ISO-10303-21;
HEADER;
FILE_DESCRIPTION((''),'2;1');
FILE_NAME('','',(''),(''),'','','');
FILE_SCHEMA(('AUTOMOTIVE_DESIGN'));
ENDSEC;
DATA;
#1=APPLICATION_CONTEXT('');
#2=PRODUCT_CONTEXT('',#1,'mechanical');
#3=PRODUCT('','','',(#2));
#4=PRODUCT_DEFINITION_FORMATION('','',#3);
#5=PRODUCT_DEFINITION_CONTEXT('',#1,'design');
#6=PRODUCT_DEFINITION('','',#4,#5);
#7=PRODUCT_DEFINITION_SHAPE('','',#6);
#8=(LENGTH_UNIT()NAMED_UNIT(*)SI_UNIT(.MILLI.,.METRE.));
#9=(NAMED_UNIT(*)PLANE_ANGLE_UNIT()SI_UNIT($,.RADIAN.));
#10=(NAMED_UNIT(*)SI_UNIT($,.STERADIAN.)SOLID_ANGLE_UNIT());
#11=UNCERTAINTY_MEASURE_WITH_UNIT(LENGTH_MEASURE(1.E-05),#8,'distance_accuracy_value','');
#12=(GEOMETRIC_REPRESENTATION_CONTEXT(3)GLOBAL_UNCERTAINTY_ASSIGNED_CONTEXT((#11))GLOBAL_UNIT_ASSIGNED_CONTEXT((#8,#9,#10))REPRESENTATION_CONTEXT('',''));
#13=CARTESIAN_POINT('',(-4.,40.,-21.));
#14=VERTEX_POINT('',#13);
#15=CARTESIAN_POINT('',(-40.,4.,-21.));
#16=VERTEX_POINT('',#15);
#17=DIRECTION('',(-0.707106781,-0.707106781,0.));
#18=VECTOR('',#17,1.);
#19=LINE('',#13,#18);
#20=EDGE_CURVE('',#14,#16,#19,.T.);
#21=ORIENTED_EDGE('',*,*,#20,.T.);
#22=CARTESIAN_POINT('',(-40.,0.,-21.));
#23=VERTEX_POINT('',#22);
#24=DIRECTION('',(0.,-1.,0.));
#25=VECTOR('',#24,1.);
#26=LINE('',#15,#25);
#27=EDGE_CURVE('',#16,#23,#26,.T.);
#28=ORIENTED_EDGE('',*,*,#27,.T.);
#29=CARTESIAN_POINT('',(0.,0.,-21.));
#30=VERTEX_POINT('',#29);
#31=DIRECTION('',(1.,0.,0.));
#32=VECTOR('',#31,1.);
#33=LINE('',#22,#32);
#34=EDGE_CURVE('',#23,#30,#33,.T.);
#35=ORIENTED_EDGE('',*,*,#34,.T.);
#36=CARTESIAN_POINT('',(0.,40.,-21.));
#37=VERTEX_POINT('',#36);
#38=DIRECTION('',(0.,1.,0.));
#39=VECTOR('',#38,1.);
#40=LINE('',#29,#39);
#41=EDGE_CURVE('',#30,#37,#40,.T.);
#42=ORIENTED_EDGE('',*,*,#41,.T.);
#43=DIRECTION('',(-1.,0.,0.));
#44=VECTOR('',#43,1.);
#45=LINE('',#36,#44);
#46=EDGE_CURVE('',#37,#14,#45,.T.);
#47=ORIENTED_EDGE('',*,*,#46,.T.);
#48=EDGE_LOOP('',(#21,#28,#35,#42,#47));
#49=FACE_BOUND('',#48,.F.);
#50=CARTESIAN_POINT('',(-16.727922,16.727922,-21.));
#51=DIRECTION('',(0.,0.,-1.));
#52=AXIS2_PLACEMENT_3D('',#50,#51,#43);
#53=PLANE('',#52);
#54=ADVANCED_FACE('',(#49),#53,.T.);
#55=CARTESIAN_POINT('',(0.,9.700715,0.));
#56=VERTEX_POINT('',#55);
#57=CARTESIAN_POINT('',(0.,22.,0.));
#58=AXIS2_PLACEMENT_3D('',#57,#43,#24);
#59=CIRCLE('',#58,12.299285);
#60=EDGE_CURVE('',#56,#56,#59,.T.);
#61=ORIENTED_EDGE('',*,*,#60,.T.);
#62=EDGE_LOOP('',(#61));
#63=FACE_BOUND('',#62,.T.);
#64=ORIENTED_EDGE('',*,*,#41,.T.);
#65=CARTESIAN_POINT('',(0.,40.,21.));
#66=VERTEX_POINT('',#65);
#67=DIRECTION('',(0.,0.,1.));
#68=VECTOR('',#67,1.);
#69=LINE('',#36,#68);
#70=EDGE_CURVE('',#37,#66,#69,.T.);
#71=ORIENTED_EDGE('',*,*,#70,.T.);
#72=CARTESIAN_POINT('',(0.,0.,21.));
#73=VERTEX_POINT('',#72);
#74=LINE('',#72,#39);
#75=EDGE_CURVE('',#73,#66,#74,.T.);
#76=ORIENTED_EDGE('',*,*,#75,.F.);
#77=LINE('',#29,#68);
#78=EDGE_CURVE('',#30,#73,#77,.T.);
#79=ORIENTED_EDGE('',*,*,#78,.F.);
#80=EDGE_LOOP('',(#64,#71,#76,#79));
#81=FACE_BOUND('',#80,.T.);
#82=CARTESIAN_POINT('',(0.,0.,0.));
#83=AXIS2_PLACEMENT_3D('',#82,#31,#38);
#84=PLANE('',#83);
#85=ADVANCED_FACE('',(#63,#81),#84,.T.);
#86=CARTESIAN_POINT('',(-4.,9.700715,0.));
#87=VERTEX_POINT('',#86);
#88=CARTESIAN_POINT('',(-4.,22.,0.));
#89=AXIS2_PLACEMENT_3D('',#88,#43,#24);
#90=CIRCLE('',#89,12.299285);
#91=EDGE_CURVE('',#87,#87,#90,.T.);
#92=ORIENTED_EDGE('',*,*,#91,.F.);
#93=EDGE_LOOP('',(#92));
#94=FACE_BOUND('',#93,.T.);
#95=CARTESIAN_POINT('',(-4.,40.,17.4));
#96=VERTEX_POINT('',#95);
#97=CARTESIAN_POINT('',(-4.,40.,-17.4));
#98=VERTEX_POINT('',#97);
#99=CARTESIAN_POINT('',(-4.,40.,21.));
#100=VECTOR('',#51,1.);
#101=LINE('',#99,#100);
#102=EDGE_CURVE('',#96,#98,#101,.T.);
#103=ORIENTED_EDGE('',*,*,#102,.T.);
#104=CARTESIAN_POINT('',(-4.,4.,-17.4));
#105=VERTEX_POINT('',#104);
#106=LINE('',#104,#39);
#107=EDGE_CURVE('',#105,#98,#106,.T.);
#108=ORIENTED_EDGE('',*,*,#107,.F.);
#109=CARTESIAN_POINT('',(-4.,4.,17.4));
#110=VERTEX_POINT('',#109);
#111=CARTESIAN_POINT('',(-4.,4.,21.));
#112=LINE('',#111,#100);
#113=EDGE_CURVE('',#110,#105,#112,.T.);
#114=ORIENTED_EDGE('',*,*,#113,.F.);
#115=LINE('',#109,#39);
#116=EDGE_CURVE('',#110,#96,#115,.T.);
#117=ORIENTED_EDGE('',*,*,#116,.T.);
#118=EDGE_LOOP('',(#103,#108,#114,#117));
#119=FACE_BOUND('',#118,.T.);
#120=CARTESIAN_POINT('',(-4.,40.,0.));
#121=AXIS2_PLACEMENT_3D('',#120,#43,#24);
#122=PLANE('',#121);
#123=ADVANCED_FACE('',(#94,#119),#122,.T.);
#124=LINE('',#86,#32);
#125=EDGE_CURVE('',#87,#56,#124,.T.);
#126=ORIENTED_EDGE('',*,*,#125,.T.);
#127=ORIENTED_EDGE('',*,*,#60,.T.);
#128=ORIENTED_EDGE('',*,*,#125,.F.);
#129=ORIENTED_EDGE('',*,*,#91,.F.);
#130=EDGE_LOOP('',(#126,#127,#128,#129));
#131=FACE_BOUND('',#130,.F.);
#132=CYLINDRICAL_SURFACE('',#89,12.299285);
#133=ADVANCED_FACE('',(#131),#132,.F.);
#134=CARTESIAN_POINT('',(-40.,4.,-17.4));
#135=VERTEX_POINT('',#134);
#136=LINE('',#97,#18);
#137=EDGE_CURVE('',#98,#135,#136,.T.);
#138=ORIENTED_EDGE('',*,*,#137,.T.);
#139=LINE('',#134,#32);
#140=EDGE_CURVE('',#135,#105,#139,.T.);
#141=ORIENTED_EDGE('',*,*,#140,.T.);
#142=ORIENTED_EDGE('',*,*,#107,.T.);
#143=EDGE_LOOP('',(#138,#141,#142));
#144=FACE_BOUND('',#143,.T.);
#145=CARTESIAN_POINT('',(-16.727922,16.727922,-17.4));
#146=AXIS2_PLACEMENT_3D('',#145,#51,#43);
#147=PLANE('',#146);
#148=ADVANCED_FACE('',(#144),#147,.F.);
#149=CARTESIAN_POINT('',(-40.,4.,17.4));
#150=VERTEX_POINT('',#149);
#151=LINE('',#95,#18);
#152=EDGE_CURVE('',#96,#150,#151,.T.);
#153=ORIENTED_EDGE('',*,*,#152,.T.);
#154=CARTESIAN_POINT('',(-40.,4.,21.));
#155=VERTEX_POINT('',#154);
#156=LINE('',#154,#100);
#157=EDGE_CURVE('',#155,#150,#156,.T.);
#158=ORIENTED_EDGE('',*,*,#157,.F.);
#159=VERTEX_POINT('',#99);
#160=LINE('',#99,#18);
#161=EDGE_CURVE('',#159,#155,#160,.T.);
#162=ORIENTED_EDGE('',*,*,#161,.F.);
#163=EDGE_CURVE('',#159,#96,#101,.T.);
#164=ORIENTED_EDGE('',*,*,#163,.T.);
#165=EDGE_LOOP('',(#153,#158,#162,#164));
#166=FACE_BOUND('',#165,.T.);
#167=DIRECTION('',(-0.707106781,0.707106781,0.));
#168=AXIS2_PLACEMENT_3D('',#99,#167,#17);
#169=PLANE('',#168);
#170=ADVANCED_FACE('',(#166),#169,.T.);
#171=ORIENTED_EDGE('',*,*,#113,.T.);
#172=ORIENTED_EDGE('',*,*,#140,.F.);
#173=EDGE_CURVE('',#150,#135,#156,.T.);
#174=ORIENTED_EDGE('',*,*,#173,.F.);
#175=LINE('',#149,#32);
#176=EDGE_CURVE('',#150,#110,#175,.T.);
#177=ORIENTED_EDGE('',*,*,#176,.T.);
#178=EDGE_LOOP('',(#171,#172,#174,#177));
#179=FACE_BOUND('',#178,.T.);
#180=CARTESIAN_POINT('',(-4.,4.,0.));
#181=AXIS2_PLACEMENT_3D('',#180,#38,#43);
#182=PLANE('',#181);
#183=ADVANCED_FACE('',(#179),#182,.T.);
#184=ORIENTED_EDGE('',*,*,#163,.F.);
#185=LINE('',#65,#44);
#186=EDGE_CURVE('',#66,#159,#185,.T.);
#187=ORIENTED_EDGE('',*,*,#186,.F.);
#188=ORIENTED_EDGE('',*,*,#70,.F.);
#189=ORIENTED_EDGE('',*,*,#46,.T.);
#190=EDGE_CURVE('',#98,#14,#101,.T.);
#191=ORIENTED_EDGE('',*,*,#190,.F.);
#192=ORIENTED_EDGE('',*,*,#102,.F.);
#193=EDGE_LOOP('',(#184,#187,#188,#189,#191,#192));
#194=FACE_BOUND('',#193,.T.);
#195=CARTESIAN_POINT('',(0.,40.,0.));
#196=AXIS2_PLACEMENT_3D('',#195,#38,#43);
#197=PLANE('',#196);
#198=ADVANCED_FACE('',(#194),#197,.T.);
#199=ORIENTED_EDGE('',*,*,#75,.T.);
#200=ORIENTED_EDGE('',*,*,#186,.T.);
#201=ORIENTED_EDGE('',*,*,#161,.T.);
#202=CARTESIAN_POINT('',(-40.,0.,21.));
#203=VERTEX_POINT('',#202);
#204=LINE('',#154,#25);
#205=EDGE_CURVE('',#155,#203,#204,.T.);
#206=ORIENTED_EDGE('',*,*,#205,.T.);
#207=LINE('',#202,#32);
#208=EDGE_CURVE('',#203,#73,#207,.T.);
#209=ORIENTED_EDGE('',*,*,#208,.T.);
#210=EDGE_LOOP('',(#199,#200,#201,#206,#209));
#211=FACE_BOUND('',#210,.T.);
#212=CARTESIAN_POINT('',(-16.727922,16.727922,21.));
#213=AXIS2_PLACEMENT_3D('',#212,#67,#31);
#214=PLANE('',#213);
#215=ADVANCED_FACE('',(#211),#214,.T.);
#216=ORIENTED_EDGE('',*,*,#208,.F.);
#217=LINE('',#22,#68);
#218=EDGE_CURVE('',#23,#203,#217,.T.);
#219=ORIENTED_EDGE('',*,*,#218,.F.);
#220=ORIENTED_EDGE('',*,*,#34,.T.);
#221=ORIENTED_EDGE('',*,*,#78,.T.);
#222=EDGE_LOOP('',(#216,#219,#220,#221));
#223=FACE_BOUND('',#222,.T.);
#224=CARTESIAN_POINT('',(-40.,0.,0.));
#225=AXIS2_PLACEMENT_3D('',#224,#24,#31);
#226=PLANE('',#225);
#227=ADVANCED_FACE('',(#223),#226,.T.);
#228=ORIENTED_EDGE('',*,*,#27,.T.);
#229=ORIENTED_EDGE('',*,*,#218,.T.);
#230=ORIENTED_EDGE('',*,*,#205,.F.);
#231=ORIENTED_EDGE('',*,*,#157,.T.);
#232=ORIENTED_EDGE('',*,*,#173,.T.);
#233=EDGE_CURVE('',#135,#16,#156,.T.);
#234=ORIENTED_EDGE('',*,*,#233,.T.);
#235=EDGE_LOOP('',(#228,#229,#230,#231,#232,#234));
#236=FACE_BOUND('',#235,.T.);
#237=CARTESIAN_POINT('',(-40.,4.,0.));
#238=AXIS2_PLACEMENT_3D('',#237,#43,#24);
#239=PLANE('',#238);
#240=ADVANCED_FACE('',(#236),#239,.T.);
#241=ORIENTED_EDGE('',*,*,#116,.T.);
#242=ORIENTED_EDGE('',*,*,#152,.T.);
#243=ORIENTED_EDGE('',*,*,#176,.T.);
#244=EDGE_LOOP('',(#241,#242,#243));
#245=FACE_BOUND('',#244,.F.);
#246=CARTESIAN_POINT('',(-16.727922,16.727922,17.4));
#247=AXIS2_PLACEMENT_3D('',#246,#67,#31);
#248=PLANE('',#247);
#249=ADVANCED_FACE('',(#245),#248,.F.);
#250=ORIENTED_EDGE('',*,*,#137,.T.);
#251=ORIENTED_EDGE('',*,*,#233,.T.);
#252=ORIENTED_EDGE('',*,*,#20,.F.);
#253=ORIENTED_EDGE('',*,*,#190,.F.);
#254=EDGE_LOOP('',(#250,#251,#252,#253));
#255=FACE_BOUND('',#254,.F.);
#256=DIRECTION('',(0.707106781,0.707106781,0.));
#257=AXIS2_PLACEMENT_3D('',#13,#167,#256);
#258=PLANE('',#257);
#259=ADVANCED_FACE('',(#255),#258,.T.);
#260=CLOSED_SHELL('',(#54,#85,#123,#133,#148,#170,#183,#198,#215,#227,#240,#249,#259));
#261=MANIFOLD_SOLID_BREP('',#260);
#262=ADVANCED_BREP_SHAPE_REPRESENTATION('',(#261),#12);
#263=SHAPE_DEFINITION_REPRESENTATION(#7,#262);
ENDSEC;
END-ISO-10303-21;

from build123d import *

# Parameters (mm, degrees)
F1_DEPTH = 21
F2_R     = 12.2992849538
F3_DEPTH = 4
F5_DEPTH = 3.6


# Not quite as in the source:
# - a pattern or mirror of a feature is missing from the dataset's text; its kind, count and spacing are read off the source's solid


with BuildPart() as f1:
    # F0 (on Top) → F1 (new body, symmetric)
    with BuildSketch(Plane.XY):
        Polygon((-40, 4), (-40, 0), (0, 0), (0, 40), (-4, 40), (-4, 4), align=None)
    extrude(amount=F1_DEPTH, both=True)

    # F2 (on face) → F3 (cut, through all)
    with BuildSketch(Plane(origin=(-4, 0, 0), x_dir=(0, -1, 0), z_dir=(-1, 0, 0))):
        with Locations((-22, 0)):
            Circle(F2_R)
    extrude(amount=-F3_DEPTH, mode=Mode.SUBTRACT)

    # F4 (on face) → F5 (join)
    with BuildSketch(Plane.XY.offset(21)):
        Polygon((-4, 40), (-40, 4), (-4, 4), align=None)
    f5 = extrude(amount=-F5_DEPTH)

    # F5_copies: F5 across plane
    add(f5.mirror(Plane(origin=(0, 0, 0), x_dir=(-1, 0, 0), z_dir=(0, 0, -1))))


solid = f1.part
